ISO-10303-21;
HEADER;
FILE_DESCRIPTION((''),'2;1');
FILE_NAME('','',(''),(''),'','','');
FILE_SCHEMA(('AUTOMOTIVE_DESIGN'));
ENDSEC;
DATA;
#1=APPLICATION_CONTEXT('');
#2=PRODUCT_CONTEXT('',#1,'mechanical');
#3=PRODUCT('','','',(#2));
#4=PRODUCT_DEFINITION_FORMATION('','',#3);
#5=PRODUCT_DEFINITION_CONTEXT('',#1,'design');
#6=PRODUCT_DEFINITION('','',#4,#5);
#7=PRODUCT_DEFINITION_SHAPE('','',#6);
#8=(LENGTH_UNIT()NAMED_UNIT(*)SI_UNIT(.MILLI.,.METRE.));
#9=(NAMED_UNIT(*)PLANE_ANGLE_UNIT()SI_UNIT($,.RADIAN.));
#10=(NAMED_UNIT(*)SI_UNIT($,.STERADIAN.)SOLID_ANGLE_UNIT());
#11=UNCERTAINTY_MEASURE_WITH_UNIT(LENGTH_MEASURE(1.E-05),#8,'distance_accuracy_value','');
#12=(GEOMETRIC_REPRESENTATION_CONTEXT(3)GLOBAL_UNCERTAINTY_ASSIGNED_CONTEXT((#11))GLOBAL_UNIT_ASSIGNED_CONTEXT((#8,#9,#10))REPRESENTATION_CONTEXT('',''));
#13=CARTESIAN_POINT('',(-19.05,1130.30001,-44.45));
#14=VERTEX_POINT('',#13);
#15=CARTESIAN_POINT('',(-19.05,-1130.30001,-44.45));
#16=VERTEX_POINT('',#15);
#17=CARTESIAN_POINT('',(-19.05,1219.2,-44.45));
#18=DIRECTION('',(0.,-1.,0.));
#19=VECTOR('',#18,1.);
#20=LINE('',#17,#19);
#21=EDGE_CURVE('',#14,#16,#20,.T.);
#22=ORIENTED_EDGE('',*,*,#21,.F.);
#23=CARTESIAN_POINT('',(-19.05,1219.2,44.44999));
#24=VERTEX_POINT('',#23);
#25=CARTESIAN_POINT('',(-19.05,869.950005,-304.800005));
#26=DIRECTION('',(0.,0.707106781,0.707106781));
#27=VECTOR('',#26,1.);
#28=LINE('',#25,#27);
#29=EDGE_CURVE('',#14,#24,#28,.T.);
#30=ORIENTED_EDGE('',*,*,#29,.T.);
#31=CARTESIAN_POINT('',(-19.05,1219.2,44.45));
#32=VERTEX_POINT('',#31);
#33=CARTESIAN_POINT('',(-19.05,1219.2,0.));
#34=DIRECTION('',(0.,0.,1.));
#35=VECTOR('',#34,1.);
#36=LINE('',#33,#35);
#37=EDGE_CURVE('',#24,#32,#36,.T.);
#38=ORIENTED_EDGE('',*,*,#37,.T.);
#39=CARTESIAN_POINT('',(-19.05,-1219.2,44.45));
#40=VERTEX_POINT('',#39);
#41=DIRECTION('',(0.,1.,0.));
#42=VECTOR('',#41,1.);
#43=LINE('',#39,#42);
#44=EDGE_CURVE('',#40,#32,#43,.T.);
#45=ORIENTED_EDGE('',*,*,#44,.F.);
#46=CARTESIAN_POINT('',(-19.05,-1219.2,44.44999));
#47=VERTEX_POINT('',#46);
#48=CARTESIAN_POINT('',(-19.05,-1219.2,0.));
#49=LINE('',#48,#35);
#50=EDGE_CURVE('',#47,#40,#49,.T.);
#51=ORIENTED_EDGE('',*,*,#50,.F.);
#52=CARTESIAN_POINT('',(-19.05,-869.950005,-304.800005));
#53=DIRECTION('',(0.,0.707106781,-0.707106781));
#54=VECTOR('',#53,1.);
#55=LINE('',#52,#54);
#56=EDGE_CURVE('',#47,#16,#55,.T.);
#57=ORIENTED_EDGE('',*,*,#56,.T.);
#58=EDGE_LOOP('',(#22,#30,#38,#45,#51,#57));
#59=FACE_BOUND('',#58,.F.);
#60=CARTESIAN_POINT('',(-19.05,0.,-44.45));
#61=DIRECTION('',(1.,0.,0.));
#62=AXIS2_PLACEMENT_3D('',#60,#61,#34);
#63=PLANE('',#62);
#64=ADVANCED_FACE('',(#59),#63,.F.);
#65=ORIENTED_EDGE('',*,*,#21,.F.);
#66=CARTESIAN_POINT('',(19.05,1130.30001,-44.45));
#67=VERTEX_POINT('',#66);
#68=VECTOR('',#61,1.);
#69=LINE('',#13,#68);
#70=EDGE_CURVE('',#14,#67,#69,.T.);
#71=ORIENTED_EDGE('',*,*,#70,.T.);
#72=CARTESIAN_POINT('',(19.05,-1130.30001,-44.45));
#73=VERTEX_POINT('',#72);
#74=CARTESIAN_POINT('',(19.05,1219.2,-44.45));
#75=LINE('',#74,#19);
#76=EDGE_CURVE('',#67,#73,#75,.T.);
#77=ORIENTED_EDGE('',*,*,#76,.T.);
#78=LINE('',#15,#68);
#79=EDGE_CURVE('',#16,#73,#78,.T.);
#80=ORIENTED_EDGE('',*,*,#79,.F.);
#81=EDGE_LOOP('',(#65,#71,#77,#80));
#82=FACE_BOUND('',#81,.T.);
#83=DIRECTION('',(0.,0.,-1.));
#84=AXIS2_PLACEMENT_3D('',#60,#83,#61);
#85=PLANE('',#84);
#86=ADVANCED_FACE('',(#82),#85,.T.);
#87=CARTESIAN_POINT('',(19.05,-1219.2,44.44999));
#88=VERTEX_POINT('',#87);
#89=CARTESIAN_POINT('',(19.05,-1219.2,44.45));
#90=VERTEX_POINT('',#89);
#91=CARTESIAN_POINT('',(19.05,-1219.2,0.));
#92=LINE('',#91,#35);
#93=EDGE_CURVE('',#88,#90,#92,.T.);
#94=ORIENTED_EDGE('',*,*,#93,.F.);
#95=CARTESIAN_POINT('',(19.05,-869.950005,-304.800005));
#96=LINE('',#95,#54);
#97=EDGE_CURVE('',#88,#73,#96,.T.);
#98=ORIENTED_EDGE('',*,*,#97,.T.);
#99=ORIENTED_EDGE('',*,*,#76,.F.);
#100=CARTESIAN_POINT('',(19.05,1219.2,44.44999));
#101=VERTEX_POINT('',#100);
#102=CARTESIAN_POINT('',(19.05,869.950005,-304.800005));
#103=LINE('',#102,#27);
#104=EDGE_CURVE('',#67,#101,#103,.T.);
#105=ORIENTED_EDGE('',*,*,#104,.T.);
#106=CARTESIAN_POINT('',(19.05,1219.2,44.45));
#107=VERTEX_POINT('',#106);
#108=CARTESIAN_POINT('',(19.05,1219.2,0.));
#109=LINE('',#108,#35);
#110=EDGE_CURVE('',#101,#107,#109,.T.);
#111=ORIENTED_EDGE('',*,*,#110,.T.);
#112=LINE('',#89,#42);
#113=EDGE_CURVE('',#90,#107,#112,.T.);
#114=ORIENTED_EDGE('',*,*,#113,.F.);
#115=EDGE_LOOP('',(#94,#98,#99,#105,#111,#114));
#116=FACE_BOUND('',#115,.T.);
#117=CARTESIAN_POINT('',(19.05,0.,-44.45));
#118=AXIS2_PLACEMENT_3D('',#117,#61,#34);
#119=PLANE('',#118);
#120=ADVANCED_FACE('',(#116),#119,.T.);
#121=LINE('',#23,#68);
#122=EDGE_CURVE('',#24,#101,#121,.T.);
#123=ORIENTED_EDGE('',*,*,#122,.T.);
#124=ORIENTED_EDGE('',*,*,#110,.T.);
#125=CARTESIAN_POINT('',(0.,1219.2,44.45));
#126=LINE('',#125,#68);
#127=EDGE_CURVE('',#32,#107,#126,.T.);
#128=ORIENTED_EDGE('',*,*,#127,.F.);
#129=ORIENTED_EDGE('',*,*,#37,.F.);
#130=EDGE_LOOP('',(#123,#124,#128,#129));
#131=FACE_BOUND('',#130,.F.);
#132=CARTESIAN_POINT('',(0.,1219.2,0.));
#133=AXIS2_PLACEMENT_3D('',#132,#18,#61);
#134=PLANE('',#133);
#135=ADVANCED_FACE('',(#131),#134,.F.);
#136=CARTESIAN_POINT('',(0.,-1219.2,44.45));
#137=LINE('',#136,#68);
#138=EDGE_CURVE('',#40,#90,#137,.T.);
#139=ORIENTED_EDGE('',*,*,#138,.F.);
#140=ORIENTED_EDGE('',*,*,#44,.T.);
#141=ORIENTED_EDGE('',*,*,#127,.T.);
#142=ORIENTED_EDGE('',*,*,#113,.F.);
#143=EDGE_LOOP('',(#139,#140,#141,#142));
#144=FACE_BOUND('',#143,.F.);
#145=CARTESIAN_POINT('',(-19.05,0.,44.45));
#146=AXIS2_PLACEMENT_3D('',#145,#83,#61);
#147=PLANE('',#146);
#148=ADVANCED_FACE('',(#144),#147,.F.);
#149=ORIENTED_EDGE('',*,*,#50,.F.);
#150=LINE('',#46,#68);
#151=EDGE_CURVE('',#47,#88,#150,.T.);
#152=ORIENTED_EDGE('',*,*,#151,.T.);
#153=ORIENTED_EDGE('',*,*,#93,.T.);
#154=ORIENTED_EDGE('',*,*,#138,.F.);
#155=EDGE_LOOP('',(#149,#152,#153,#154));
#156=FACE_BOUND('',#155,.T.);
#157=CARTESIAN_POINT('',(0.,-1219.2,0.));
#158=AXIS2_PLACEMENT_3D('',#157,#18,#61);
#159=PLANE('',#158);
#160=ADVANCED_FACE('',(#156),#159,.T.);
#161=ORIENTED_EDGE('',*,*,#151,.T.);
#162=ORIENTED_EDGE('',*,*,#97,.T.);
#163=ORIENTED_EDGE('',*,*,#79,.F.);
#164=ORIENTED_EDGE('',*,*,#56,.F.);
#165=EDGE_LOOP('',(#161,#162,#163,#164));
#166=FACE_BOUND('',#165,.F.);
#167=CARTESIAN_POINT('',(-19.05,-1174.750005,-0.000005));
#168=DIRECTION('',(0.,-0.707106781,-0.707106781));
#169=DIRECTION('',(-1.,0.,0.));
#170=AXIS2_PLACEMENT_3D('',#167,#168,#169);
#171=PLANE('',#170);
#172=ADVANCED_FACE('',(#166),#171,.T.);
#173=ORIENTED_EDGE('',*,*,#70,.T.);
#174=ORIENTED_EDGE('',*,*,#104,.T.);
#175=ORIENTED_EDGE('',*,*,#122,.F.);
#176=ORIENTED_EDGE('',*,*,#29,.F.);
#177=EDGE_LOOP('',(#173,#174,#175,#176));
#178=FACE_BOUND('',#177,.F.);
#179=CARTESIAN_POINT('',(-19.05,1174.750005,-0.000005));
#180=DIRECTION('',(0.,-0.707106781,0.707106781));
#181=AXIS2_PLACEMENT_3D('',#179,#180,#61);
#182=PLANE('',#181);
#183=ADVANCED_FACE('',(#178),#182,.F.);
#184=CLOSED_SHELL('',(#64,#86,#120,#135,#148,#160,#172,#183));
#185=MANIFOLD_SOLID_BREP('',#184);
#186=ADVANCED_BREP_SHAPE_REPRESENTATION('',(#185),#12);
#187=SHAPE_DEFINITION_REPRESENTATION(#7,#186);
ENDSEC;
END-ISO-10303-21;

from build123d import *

# Parameters (mm, degrees)
F0_W     = 38.1
F0_H     = 88.9
F1_DEPTH = 1219.2
F2_SIZE2 = 88.89999
F2_SIZE  = 88.89999
F3_SIZE2 = 88.89999
F3_SIZE  = 88.89999


# Not quite as in the source:
# - a fillet or chamfer is up to 0.001 mm smaller than in the source, because OpenCascade refuses the exact size


with BuildPart() as f1:
    # F0 (on Front) → F1 (new body, symmetric)
    with BuildSketch(Plane.XZ):
        Rectangle(F0_W, F0_H)
    extrude(amount=F1_DEPTH, both=True)

    # F2 (size 88.9 and 88.9 in the source; OpenCascade refuses exactly that, so slightly less here)
    f2_edges = [f1.edges().sort_by_distance(p)[0] for p in [
        (0, -1219.2, -44.45),
    ]]
    chamfer(f2_edges, length=F2_SIZE, length2=F2_SIZE2)

    # F3 (size 88.9 and 88.9 in the source; OpenCascade refuses exactly that, so slightly less here)
    f3_edges = [f1.edges().sort_by_distance(p)[0] for p in [
        (0, 1219.2, -44.45),
    ]]
    chamfer(f3_edges, length=F3_SIZE, length2=F3_SIZE2)


solid = f1.part
